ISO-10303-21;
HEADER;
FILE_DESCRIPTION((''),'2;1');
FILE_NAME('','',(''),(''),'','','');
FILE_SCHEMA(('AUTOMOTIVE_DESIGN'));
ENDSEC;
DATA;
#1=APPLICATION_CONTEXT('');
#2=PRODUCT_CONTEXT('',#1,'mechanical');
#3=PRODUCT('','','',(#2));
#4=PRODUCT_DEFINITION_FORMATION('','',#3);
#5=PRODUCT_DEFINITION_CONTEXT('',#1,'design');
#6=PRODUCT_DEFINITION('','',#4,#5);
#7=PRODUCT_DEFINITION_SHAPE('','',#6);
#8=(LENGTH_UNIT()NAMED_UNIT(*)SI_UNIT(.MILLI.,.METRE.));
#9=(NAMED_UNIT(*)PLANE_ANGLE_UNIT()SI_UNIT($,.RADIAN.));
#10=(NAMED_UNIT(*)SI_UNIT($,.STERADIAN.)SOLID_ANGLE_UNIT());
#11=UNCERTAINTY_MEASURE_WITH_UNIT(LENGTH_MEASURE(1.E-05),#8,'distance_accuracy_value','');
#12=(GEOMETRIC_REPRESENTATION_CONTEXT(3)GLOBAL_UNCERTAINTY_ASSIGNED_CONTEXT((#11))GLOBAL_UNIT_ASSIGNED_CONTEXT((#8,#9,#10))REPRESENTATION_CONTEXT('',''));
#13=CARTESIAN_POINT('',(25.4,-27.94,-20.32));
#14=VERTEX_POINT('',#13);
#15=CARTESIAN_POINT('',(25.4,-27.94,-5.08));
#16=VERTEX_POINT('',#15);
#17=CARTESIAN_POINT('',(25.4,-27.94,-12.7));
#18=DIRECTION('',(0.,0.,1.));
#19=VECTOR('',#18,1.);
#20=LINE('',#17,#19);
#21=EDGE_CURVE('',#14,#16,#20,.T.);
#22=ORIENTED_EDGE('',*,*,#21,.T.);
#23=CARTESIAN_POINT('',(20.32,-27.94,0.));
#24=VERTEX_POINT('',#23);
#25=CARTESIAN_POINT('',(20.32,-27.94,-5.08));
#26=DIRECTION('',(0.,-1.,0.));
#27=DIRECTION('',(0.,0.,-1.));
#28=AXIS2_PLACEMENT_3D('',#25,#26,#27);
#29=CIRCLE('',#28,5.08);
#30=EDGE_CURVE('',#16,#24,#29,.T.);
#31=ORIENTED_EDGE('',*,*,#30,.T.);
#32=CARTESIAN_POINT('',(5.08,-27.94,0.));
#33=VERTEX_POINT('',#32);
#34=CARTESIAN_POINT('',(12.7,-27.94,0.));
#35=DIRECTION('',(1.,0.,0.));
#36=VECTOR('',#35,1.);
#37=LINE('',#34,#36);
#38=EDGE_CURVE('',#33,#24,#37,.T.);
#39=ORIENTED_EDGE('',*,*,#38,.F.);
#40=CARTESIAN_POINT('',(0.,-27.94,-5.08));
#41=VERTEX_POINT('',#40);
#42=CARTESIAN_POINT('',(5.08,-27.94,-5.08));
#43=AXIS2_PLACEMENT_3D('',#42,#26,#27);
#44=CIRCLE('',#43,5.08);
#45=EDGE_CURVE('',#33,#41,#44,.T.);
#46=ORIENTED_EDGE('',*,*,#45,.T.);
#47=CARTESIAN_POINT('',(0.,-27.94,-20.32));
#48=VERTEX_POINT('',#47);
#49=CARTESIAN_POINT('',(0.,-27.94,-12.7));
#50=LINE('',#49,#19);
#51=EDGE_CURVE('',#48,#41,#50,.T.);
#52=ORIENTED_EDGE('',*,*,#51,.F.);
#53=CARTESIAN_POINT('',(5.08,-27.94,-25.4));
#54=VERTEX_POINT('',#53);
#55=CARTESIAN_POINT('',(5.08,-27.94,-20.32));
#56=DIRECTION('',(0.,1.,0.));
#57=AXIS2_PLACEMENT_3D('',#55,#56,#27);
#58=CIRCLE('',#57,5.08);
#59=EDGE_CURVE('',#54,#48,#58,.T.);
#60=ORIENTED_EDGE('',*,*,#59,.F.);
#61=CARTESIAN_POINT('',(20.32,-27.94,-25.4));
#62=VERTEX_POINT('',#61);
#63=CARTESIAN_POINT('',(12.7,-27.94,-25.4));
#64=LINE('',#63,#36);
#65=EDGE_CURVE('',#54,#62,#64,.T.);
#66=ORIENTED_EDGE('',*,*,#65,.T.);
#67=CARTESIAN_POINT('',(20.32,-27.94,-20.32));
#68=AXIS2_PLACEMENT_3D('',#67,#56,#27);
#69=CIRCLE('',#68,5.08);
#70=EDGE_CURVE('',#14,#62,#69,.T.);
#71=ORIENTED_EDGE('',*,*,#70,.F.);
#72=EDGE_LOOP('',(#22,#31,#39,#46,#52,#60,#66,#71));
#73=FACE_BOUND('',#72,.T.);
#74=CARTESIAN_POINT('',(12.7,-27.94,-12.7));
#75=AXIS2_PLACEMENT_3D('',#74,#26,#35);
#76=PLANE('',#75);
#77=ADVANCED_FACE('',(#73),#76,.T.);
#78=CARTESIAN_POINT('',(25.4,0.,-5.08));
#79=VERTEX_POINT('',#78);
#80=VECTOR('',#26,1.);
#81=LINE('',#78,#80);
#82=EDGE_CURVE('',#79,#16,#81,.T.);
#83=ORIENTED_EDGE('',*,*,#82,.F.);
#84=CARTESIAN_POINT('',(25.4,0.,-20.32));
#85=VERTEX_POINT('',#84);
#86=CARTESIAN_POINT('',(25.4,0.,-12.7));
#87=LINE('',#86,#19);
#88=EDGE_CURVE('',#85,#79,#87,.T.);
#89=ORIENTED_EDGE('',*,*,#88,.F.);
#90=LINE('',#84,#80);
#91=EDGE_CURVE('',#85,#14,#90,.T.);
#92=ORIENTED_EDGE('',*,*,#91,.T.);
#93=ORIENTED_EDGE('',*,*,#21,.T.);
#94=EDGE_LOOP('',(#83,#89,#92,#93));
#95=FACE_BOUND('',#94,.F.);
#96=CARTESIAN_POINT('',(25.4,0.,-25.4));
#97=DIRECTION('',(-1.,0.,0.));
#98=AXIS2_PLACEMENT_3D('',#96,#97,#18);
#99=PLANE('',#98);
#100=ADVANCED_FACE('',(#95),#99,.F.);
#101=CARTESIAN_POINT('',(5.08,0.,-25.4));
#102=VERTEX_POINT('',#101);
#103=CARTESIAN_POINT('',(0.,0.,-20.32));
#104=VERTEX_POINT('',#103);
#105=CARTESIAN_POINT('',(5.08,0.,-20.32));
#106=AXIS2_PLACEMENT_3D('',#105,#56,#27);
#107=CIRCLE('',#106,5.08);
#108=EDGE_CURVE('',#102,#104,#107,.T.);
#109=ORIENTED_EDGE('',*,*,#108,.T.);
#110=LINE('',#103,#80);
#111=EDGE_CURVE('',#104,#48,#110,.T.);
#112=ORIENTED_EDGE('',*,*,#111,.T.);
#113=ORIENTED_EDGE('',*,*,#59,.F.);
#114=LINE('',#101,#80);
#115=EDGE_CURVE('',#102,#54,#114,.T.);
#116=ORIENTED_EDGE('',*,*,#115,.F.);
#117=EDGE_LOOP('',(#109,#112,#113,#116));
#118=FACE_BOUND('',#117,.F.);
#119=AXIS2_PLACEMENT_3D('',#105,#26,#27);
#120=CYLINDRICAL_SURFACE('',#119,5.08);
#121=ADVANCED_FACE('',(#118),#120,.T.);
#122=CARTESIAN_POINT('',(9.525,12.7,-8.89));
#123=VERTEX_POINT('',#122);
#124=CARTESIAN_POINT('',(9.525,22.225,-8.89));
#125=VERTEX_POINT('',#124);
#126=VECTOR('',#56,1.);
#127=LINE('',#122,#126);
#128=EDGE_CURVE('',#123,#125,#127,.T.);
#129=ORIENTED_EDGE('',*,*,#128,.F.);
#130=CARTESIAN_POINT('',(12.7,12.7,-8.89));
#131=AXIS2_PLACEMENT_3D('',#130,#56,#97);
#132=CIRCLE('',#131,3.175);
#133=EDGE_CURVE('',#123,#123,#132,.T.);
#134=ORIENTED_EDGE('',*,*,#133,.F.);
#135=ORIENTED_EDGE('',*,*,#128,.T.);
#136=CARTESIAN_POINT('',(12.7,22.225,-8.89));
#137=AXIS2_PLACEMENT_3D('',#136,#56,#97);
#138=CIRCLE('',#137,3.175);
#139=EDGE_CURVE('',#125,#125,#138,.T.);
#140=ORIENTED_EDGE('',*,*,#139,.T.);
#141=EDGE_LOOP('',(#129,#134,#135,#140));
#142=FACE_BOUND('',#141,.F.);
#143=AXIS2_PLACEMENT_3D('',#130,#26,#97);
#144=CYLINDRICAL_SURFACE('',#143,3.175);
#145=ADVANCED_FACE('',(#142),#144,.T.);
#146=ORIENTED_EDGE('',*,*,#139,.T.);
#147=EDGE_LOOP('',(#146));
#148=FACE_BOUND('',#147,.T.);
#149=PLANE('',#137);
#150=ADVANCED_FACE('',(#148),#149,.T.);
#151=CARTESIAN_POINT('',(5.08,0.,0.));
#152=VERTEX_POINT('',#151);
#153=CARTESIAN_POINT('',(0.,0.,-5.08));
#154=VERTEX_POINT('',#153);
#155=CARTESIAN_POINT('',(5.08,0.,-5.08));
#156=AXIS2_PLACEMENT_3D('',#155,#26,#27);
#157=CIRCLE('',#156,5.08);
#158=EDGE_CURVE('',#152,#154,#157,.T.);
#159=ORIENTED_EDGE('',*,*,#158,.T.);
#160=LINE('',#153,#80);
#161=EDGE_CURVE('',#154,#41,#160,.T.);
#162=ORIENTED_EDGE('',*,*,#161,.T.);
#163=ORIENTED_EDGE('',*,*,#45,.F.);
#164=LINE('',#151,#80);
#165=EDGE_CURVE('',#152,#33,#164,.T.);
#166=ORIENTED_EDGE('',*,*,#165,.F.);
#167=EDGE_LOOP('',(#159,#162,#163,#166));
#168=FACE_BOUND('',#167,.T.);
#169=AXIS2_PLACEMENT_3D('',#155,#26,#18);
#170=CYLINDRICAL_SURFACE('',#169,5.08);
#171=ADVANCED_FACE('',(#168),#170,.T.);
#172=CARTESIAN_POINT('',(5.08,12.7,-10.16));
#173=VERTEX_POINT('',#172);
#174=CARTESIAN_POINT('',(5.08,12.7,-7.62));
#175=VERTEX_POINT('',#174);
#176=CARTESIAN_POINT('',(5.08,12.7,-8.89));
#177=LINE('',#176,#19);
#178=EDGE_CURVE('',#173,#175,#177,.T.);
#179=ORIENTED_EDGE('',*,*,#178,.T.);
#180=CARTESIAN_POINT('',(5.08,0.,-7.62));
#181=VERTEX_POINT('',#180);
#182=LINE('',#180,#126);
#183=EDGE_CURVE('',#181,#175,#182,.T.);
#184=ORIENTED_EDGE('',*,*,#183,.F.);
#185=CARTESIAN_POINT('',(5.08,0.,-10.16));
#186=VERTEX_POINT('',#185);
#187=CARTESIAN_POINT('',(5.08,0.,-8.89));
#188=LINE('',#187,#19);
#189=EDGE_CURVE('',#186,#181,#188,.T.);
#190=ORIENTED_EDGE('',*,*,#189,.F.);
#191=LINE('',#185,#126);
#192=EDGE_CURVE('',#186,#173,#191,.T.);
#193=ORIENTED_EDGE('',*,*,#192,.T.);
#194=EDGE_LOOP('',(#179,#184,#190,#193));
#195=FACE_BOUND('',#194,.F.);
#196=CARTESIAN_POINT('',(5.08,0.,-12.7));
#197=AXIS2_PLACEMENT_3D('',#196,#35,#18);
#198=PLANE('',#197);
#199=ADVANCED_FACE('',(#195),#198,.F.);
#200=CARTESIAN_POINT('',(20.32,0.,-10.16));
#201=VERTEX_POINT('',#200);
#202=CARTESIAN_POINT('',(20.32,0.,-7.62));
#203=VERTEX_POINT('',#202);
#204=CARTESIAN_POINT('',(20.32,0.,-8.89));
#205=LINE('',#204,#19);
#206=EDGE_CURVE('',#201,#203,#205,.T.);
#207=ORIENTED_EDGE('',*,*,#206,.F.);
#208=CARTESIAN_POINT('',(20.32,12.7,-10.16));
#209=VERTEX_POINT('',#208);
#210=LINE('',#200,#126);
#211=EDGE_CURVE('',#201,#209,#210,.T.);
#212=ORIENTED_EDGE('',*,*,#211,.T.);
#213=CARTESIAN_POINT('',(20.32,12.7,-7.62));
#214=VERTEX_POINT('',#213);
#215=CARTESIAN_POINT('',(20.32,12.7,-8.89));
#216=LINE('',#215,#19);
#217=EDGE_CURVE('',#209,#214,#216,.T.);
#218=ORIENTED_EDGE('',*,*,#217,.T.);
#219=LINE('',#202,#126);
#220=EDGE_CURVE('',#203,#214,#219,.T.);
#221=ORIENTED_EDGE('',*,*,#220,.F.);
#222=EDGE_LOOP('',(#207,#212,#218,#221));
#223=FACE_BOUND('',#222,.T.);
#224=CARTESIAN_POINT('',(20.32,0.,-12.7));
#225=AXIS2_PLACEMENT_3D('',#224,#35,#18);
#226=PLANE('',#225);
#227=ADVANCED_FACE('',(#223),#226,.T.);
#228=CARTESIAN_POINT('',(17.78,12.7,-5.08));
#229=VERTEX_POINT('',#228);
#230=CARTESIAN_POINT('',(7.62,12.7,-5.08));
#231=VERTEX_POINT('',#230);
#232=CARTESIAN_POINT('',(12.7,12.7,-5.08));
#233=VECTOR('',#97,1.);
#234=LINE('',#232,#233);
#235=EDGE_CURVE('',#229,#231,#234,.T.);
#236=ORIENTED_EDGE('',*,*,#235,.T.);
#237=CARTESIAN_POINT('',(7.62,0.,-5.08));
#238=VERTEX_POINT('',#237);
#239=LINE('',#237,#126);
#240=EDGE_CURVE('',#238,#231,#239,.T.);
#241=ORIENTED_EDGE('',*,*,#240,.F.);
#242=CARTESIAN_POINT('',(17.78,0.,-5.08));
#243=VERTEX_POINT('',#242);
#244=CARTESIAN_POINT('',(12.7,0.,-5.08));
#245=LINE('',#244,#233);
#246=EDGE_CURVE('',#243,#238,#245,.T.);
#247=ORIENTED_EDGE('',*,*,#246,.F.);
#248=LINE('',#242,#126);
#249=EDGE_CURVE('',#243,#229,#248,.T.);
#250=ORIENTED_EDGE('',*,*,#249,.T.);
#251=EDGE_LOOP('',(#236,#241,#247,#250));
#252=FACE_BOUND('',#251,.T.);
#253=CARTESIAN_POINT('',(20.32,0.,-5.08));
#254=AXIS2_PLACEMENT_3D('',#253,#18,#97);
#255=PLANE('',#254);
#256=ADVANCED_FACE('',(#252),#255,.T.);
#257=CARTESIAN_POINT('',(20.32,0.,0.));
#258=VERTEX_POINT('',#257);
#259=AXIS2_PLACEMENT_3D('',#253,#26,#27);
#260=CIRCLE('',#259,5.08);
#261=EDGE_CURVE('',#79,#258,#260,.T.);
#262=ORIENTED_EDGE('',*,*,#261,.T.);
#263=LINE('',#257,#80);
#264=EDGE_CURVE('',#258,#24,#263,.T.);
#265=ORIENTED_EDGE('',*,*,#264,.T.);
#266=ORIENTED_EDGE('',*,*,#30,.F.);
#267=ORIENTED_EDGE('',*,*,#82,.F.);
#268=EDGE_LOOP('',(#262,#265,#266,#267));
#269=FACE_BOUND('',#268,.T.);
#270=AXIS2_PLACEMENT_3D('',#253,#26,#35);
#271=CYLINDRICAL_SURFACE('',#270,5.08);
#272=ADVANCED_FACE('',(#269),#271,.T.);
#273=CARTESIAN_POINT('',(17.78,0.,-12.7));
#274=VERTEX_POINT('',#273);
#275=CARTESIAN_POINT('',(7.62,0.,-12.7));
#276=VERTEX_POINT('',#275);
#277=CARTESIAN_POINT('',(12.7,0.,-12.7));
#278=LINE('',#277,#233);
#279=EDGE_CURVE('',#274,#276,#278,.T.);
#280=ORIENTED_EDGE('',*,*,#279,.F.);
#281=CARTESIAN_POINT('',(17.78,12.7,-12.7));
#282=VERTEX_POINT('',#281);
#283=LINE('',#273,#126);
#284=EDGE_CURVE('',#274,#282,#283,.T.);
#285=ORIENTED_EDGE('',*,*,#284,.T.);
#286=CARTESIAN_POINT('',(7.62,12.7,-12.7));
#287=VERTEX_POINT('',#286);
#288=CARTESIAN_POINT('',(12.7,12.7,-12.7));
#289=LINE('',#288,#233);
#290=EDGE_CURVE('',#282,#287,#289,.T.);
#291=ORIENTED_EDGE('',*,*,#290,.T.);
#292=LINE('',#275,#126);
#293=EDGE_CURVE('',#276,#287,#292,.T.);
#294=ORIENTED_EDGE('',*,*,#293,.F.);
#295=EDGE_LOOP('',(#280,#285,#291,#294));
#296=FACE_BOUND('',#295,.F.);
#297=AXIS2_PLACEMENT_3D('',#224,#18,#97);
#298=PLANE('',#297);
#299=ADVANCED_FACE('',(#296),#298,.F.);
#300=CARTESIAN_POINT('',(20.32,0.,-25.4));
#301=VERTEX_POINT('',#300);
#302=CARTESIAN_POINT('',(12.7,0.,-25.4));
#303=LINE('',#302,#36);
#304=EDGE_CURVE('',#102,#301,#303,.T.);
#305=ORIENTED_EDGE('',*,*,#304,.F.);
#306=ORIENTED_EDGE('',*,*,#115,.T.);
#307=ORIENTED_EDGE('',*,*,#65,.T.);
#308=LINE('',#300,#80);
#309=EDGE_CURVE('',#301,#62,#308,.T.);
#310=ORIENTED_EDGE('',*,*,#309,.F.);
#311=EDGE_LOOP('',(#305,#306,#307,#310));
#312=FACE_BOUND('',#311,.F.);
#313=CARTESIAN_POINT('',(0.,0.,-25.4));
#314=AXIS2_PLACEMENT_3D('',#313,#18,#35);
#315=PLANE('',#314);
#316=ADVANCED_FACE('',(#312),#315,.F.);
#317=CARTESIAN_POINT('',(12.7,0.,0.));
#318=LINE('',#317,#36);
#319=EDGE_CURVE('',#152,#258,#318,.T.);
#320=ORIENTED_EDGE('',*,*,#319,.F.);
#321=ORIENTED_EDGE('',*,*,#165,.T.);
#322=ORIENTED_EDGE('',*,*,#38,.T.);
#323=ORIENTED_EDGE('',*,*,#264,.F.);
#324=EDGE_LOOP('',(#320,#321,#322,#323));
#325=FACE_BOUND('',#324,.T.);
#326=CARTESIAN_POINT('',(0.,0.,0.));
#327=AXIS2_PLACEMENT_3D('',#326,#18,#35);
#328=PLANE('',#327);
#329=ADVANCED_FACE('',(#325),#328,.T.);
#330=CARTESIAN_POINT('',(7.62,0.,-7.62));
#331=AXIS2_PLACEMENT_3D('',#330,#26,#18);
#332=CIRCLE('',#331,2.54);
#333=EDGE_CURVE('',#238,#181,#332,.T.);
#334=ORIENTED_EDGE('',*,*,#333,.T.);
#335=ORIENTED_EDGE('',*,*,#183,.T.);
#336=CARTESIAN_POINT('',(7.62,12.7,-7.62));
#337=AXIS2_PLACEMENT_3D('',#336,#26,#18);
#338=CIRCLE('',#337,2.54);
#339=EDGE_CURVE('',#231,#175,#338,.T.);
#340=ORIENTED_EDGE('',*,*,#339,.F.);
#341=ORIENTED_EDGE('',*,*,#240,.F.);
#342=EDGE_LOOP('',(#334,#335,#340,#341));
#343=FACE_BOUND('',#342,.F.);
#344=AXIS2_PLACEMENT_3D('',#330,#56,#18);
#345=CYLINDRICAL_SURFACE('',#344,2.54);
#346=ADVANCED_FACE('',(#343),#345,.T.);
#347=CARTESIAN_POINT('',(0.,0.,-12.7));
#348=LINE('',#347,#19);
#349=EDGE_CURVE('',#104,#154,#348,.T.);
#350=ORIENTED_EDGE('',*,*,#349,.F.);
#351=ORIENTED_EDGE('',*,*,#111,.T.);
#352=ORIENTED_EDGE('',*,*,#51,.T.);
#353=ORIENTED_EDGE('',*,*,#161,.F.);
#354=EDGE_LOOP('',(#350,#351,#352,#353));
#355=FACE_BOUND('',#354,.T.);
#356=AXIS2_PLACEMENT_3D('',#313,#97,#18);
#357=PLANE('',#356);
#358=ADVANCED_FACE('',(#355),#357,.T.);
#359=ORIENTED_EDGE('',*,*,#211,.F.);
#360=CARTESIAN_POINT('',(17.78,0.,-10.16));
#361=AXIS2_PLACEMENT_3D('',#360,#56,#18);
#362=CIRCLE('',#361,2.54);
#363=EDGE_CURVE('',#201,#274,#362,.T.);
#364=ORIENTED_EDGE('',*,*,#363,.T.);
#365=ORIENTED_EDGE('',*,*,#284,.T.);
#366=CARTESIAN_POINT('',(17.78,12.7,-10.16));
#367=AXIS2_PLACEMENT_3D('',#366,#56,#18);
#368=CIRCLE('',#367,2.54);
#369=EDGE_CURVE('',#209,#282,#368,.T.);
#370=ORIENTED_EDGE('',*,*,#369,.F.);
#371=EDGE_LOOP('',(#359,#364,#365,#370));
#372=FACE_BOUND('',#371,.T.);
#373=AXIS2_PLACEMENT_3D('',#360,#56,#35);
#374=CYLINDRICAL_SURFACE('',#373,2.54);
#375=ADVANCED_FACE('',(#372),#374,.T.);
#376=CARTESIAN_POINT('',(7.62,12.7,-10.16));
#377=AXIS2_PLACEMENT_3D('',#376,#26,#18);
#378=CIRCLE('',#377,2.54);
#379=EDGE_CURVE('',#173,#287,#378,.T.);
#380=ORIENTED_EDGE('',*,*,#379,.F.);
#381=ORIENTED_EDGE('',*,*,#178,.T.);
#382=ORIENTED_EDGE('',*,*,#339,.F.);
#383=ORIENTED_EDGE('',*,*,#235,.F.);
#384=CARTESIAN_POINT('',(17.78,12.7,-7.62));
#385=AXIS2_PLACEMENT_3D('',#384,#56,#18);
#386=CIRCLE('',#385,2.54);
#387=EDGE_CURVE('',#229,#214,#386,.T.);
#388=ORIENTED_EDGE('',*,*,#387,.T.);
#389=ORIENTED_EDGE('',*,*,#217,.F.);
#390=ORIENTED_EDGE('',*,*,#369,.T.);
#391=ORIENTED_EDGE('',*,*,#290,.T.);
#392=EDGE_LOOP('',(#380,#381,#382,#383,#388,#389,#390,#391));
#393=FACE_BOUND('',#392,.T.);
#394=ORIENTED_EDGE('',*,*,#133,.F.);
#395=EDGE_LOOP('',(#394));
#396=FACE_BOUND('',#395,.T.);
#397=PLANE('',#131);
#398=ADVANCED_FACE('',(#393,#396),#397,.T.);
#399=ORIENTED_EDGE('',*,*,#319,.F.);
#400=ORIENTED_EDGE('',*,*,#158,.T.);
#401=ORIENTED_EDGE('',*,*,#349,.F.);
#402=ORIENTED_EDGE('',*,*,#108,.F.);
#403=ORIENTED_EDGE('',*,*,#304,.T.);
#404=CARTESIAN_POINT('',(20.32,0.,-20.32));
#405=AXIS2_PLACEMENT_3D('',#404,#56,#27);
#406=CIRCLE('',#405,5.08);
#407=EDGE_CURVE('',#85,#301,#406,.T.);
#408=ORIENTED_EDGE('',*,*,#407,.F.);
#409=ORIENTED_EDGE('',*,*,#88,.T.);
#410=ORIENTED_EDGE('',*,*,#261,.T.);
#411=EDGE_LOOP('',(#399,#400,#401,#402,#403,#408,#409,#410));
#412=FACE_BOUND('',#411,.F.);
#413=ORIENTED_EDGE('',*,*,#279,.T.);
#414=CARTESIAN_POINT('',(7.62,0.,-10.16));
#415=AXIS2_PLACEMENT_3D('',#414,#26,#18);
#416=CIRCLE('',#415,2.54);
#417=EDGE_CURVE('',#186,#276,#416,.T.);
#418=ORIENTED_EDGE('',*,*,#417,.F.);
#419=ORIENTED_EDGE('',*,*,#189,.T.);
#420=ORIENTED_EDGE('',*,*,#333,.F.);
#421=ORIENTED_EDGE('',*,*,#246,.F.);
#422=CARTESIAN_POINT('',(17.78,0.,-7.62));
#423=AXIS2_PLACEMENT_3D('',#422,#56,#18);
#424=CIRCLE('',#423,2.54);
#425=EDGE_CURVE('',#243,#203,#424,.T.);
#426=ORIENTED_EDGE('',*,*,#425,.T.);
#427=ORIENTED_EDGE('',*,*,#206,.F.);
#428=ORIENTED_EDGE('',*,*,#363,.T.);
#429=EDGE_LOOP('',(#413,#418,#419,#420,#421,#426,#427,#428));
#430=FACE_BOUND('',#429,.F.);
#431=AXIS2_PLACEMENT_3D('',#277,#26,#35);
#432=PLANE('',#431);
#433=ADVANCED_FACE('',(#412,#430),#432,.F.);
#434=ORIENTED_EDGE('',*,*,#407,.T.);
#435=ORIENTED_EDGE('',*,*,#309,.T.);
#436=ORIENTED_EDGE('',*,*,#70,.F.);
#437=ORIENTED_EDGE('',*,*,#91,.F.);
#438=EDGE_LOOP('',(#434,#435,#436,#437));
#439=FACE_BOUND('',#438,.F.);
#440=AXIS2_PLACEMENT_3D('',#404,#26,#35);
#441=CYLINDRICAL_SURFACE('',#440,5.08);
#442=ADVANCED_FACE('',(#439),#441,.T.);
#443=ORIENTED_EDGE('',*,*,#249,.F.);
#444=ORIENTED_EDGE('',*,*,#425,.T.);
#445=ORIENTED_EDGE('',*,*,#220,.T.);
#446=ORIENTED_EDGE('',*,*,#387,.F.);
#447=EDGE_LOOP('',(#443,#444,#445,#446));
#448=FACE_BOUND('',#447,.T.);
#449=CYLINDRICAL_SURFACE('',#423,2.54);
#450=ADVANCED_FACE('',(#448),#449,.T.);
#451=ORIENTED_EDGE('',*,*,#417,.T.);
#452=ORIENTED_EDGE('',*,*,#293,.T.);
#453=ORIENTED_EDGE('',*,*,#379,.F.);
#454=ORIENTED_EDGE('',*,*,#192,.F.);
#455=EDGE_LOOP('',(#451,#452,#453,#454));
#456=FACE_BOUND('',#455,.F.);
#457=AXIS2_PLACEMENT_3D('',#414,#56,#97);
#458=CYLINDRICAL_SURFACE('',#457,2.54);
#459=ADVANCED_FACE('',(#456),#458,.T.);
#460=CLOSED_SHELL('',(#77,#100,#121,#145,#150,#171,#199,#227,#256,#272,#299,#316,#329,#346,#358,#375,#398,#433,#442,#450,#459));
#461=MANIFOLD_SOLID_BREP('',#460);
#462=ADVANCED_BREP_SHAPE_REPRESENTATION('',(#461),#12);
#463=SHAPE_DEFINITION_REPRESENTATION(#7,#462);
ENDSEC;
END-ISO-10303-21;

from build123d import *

# Parameters (mm, degrees)
F0_W      = 25.4
F0_H      = 25.4
F1_DEPTH  = 27.94
F2_R      = 5.08
F3_R      = 5.08
F4_R      = 5.08
F5_R      = 5.08
F6_W      = 15.24
F6_H      = 7.62
F7_DEPTH  = 12.7
F8_R      = 2.54
F9_R      = 2.54
F10_R     = 2.54
F11_R     = 2.54
F12_R     = 3.175
F14_DEPTH = 9.525


with BuildPart() as f1:
    # F0 (on Front) → F1 (new body)
    with BuildSketch(Plane.XZ):
        with Locations((12.7, -12.7)):
            Rectangle(F0_W, F0_H)
    extrude(amount=F1_DEPTH)

    # F2
    f2_edges = [f1.edges().sort_by_distance(p)[0] for p in [
        (25.4, -13.97, 0),
    ]]
    fillet(f2_edges, radius=F2_R)

    # F3
    f3_edges = [f1.edges().sort_by_distance(p)[0] for p in [
        (0, -13.97, 0),
    ]]
    fillet(f3_edges, radius=F3_R)

    # F4
    f4_edges = [f1.edges().sort_by_distance(p)[0] for p in [
        (25.4, -13.97, -25.4),
    ]]
    fillet(f4_edges, radius=F4_R)

    # F5
    f5_edges = [f1.edges().sort_by_distance(p)[0] for p in [
        (0, -13.97, -25.4),
    ]]
    fillet(f5_edges, radius=F5_R)

    # F6 (on face) → F7 (join)
    with BuildSketch(Plane(origin=(0, 0, 0), x_dir=(-1, 0, 0), z_dir=(0, 1, 0))):
        with Locations((-12.7, -8.89)):
            Rectangle(F6_W, F6_H)
    extrude(amount=F7_DEPTH)

    # F8
    f8_edges = [f1.edges().sort_by_distance(p)[0] for p in [
        (5.08, 6.35, -5.08),
    ]]
    fillet(f8_edges, radius=F8_R)

    # F9
    f9_edges = [f1.edges().sort_by_distance(p)[0] for p in [
        (5.08, 6.35, -12.7),
    ]]
    fillet(f9_edges, radius=F9_R)

    # F10
    f10_edges = [f1.edges().sort_by_distance(p)[0] for p in [
        (20.32, 6.35, -5.08),
    ]]
    fillet(f10_edges, radius=F10_R)

    # F11
    f11_edges = [f1.edges().sort_by_distance(p)[0] for p in [
        (20.32, 6.35, -12.7),
    ]]
    fillet(f11_edges, radius=F11_R)

    # F12 (on face) → F14 (join)
    with BuildSketch(Plane(origin=(0, 12.7, 0), x_dir=(-1, 0, 0), z_dir=(0, 1, 0))):
        with Locations((-12.7, -8.89)):
            Circle(F12_R)
    extrude(amount=F14_DEPTH)


solid = f1.part
